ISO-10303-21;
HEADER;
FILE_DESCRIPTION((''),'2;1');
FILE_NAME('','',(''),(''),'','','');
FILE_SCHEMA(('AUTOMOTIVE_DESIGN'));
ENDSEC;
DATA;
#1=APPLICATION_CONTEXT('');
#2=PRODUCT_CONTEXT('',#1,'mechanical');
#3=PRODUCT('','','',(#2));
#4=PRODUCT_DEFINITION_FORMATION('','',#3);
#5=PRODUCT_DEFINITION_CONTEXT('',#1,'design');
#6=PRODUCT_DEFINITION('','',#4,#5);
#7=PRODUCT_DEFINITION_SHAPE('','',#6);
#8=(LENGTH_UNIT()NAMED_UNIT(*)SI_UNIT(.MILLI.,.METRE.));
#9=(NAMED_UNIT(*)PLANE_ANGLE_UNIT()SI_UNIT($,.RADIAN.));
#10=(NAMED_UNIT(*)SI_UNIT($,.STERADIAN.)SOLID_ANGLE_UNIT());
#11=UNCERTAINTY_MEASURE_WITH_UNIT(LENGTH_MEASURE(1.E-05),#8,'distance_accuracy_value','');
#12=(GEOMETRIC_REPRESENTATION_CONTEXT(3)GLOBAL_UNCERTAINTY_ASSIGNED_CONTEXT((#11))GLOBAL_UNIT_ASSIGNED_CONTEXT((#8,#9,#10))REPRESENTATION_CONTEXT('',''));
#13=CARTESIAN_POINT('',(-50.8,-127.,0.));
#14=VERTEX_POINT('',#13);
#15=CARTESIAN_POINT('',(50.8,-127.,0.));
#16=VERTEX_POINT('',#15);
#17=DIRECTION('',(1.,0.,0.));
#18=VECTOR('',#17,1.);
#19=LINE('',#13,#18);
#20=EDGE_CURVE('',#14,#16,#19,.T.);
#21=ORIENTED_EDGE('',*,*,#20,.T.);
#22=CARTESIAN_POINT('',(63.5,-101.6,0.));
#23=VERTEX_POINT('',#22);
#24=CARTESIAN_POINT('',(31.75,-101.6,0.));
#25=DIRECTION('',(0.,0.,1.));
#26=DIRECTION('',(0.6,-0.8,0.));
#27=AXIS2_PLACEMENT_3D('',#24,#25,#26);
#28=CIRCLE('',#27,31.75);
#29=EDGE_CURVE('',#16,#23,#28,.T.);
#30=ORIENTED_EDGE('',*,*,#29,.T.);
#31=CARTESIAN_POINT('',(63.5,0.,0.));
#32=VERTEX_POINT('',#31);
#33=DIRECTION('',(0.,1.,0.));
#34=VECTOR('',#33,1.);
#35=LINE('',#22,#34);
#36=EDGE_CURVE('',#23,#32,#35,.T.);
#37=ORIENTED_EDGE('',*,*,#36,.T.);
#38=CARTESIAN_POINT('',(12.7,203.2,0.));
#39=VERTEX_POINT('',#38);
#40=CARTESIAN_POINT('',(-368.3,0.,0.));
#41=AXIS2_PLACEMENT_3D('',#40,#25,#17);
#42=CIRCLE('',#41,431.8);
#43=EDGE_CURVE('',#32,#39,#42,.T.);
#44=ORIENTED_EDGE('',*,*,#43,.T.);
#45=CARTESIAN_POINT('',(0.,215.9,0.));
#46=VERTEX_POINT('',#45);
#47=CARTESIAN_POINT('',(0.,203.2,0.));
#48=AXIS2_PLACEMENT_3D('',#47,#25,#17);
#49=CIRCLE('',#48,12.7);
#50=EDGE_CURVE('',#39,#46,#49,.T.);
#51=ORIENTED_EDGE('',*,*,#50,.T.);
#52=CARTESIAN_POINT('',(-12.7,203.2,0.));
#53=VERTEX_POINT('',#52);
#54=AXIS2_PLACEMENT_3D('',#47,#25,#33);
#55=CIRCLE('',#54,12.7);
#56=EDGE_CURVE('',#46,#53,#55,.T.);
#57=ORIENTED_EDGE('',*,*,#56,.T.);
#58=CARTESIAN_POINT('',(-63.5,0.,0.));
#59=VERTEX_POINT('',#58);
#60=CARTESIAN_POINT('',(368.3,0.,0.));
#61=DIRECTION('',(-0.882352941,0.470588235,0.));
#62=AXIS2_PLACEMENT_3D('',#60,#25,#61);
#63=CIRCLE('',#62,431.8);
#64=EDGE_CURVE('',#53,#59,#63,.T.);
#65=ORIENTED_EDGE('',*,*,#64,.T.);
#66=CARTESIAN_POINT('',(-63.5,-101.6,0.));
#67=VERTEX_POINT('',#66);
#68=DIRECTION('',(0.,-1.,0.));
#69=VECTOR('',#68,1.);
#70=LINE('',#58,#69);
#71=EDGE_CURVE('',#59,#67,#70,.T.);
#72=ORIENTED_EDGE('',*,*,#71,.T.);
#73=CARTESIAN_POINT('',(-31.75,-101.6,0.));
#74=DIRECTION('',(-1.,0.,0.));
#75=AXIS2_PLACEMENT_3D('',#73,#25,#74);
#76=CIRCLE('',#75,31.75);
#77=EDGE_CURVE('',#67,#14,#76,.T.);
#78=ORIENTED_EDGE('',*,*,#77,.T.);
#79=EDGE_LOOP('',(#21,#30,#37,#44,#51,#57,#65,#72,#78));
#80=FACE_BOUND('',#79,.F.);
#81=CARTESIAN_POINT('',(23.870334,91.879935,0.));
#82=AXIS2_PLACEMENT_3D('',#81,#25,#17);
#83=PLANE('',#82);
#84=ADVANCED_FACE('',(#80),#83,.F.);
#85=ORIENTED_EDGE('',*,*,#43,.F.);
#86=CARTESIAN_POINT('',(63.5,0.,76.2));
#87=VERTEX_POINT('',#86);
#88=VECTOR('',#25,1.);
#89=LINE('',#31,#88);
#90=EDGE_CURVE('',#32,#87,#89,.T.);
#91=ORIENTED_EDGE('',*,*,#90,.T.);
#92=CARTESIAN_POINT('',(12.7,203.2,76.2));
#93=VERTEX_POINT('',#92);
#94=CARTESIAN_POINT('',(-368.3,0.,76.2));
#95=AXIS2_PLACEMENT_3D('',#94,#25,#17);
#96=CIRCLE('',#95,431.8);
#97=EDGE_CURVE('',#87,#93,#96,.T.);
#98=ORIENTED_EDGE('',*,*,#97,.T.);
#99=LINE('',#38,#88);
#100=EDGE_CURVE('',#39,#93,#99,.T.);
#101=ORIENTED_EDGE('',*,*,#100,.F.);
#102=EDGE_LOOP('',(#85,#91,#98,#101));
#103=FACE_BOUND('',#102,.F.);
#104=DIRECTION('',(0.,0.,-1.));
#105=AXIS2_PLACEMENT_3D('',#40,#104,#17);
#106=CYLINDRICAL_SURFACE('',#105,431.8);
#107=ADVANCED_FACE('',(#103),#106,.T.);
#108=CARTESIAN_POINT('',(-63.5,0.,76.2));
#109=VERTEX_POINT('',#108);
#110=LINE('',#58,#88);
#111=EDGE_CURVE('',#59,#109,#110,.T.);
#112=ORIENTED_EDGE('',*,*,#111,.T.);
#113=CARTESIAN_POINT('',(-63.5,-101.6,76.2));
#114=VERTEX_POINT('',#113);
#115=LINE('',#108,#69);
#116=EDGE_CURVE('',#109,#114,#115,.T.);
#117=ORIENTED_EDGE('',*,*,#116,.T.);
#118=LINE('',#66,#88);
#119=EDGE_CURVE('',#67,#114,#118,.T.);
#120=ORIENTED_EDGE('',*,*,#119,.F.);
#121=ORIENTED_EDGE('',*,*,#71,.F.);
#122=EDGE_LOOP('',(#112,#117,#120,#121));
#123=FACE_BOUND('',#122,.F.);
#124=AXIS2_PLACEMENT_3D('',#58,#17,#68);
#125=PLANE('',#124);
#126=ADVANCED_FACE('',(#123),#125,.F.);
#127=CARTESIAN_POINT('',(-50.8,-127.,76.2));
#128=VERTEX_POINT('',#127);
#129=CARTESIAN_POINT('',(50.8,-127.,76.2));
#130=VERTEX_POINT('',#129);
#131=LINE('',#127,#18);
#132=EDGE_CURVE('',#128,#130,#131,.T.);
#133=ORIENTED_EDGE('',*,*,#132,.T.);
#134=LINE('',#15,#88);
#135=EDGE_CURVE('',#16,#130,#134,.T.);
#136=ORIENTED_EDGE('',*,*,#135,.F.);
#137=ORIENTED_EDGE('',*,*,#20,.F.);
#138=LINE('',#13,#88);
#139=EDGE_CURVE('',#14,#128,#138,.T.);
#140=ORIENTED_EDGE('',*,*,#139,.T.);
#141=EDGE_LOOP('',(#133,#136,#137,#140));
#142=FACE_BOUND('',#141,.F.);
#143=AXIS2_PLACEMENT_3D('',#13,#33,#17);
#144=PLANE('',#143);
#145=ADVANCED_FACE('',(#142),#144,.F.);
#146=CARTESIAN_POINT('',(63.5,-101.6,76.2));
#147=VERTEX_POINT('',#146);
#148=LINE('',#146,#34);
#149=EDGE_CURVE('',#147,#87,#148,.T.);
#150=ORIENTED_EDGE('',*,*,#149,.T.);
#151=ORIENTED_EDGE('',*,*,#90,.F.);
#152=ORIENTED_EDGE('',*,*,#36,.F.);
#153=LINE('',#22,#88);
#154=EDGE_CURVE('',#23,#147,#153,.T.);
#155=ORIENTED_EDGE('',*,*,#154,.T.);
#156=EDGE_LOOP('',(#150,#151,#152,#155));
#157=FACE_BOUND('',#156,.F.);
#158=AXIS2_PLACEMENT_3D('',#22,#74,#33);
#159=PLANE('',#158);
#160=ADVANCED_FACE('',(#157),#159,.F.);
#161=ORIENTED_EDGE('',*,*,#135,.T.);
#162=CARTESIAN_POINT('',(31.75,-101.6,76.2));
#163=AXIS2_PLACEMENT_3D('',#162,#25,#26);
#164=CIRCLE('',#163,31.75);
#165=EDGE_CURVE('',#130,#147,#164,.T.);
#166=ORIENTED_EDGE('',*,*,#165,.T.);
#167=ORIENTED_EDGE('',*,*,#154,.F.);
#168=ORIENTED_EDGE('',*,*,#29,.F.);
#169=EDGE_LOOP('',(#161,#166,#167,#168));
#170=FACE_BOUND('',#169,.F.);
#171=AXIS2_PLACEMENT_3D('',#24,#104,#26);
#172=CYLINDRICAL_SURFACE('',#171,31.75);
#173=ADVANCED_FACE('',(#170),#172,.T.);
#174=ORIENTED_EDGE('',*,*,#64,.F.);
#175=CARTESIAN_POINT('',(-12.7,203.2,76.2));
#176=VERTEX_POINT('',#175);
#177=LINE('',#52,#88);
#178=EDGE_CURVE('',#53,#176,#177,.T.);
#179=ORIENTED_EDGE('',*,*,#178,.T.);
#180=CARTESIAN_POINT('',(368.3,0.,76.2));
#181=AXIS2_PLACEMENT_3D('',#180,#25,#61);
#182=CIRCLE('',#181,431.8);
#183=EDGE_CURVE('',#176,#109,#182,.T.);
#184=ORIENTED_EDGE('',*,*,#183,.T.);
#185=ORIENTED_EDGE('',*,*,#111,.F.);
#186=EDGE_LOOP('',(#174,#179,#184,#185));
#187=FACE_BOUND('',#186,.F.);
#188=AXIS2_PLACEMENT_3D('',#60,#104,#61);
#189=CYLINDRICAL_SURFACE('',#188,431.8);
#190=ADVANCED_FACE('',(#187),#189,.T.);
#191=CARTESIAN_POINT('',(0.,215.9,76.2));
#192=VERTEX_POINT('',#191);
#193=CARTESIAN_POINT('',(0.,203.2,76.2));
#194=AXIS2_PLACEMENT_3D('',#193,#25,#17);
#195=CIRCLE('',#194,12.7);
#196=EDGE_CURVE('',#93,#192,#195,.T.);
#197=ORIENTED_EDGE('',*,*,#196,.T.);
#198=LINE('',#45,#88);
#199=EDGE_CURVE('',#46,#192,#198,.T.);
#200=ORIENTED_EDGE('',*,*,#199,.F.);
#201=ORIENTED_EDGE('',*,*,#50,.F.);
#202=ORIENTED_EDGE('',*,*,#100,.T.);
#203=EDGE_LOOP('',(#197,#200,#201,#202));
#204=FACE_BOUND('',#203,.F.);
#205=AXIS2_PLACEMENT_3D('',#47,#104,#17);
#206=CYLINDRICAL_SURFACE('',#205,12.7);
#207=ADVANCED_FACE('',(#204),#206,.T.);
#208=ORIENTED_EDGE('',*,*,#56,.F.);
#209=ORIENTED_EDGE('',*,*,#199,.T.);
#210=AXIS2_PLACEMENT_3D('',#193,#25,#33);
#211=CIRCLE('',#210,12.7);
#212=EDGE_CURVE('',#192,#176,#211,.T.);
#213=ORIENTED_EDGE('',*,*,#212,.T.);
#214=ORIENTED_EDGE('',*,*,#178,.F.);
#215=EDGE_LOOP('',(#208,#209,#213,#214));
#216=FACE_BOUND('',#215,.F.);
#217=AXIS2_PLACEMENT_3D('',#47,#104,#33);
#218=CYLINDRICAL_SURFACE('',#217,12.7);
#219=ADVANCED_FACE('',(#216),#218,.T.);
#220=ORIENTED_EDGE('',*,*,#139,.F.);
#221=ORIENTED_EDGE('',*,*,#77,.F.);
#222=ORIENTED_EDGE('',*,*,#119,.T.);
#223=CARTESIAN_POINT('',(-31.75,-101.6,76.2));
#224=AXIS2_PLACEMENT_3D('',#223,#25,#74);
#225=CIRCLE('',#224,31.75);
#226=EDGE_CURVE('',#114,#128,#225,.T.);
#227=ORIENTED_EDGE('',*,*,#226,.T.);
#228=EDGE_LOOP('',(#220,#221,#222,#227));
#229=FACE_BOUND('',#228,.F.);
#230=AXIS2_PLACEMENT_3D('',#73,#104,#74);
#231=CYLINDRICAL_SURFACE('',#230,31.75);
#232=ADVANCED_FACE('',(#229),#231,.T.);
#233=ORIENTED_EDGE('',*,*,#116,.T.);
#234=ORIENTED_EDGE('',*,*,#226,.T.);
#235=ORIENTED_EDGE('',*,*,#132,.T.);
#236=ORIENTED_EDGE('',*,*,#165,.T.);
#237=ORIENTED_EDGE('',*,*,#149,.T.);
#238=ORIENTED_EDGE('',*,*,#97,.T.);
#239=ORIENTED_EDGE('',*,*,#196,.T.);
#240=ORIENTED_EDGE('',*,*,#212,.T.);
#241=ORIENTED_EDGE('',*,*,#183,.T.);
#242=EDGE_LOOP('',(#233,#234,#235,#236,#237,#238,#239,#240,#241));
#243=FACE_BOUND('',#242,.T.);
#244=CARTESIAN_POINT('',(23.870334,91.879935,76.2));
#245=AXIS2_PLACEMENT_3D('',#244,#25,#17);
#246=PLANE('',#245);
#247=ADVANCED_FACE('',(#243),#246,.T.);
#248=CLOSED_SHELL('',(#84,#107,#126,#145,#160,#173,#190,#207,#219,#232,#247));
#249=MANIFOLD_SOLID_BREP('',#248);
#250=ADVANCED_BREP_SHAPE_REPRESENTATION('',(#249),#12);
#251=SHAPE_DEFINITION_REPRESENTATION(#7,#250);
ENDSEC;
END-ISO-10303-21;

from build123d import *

# Parameters (mm, degrees)
F1_DEPTH = 76.2


# Not quite as in the source:
# - a feature of the source that left no trace in its solid (it failed there, or was rolled back) is left out


with BuildPart() as f1:
    # F0 (on Top) → F1 (new body)
    with BuildSketch(Plane.XY):
        with BuildLine():
            Line((0, 203.2), (0, 0))
            Line((0, 0), (63.5, 0))
            ThreePointArc((63.5, 0), (50.6075315628, 104.7268828907), (12.7, 203.2))
            Line((12.7, 203.2), (0, 203.2))
        make_face()
        with BuildLine():
            Line((-63.5, 0), (0, 0))
            Line((0, 0), (0, 203.2))
            Line((0, 203.2), (-12.7, 203.2))
            ThreePointArc((-12.7, 203.2), (-50.6075315628, 104.7268828907), (-63.5, 0))
        make_face()
        with BuildLine():
            Line((0, 215.9), (0, 203.2))
            Line((0, 203.2), (12.7, 203.2))
            ThreePointArc((12.7, 203.2), (8.9802561211, 212.1802561211), (0, 215.9))
        make_face()
        with BuildLine():
            Line((-12.7, 203.2), (0, 203.2))
            Line((0, 203.2), (0, 215.9))
            ThreePointArc((0, 215.9), (-8.9802561211, 212.1802561211), (-12.7, 203.2))
        make_face()
        with BuildLine():
            Line((0, -127), (0, 0))
            Line((0, 0), (-63.5, 0))
            Line((-63.5, 0), (-63.5, -101.6))
            ThreePointArc((-63.5, -101.6), (-60.1480633142, -115.7990316571), (-50.8, -127))
            Line((-50.8, -127), (0, -127))
        make_face()
        with BuildLine():
            Line((63.5, 0), (0, 0))
            Line((0, 0), (0, -127))
            Line((0, -127), (50.8, -127))
            ThreePointArc((50.8, -127), (60.1480633142, -115.7990316571), (63.5, -101.6))
            Line((63.5, -101.6), (63.5, 0))
        make_face()
    extrude(amount=F1_DEPTH)


solid = f1.part
